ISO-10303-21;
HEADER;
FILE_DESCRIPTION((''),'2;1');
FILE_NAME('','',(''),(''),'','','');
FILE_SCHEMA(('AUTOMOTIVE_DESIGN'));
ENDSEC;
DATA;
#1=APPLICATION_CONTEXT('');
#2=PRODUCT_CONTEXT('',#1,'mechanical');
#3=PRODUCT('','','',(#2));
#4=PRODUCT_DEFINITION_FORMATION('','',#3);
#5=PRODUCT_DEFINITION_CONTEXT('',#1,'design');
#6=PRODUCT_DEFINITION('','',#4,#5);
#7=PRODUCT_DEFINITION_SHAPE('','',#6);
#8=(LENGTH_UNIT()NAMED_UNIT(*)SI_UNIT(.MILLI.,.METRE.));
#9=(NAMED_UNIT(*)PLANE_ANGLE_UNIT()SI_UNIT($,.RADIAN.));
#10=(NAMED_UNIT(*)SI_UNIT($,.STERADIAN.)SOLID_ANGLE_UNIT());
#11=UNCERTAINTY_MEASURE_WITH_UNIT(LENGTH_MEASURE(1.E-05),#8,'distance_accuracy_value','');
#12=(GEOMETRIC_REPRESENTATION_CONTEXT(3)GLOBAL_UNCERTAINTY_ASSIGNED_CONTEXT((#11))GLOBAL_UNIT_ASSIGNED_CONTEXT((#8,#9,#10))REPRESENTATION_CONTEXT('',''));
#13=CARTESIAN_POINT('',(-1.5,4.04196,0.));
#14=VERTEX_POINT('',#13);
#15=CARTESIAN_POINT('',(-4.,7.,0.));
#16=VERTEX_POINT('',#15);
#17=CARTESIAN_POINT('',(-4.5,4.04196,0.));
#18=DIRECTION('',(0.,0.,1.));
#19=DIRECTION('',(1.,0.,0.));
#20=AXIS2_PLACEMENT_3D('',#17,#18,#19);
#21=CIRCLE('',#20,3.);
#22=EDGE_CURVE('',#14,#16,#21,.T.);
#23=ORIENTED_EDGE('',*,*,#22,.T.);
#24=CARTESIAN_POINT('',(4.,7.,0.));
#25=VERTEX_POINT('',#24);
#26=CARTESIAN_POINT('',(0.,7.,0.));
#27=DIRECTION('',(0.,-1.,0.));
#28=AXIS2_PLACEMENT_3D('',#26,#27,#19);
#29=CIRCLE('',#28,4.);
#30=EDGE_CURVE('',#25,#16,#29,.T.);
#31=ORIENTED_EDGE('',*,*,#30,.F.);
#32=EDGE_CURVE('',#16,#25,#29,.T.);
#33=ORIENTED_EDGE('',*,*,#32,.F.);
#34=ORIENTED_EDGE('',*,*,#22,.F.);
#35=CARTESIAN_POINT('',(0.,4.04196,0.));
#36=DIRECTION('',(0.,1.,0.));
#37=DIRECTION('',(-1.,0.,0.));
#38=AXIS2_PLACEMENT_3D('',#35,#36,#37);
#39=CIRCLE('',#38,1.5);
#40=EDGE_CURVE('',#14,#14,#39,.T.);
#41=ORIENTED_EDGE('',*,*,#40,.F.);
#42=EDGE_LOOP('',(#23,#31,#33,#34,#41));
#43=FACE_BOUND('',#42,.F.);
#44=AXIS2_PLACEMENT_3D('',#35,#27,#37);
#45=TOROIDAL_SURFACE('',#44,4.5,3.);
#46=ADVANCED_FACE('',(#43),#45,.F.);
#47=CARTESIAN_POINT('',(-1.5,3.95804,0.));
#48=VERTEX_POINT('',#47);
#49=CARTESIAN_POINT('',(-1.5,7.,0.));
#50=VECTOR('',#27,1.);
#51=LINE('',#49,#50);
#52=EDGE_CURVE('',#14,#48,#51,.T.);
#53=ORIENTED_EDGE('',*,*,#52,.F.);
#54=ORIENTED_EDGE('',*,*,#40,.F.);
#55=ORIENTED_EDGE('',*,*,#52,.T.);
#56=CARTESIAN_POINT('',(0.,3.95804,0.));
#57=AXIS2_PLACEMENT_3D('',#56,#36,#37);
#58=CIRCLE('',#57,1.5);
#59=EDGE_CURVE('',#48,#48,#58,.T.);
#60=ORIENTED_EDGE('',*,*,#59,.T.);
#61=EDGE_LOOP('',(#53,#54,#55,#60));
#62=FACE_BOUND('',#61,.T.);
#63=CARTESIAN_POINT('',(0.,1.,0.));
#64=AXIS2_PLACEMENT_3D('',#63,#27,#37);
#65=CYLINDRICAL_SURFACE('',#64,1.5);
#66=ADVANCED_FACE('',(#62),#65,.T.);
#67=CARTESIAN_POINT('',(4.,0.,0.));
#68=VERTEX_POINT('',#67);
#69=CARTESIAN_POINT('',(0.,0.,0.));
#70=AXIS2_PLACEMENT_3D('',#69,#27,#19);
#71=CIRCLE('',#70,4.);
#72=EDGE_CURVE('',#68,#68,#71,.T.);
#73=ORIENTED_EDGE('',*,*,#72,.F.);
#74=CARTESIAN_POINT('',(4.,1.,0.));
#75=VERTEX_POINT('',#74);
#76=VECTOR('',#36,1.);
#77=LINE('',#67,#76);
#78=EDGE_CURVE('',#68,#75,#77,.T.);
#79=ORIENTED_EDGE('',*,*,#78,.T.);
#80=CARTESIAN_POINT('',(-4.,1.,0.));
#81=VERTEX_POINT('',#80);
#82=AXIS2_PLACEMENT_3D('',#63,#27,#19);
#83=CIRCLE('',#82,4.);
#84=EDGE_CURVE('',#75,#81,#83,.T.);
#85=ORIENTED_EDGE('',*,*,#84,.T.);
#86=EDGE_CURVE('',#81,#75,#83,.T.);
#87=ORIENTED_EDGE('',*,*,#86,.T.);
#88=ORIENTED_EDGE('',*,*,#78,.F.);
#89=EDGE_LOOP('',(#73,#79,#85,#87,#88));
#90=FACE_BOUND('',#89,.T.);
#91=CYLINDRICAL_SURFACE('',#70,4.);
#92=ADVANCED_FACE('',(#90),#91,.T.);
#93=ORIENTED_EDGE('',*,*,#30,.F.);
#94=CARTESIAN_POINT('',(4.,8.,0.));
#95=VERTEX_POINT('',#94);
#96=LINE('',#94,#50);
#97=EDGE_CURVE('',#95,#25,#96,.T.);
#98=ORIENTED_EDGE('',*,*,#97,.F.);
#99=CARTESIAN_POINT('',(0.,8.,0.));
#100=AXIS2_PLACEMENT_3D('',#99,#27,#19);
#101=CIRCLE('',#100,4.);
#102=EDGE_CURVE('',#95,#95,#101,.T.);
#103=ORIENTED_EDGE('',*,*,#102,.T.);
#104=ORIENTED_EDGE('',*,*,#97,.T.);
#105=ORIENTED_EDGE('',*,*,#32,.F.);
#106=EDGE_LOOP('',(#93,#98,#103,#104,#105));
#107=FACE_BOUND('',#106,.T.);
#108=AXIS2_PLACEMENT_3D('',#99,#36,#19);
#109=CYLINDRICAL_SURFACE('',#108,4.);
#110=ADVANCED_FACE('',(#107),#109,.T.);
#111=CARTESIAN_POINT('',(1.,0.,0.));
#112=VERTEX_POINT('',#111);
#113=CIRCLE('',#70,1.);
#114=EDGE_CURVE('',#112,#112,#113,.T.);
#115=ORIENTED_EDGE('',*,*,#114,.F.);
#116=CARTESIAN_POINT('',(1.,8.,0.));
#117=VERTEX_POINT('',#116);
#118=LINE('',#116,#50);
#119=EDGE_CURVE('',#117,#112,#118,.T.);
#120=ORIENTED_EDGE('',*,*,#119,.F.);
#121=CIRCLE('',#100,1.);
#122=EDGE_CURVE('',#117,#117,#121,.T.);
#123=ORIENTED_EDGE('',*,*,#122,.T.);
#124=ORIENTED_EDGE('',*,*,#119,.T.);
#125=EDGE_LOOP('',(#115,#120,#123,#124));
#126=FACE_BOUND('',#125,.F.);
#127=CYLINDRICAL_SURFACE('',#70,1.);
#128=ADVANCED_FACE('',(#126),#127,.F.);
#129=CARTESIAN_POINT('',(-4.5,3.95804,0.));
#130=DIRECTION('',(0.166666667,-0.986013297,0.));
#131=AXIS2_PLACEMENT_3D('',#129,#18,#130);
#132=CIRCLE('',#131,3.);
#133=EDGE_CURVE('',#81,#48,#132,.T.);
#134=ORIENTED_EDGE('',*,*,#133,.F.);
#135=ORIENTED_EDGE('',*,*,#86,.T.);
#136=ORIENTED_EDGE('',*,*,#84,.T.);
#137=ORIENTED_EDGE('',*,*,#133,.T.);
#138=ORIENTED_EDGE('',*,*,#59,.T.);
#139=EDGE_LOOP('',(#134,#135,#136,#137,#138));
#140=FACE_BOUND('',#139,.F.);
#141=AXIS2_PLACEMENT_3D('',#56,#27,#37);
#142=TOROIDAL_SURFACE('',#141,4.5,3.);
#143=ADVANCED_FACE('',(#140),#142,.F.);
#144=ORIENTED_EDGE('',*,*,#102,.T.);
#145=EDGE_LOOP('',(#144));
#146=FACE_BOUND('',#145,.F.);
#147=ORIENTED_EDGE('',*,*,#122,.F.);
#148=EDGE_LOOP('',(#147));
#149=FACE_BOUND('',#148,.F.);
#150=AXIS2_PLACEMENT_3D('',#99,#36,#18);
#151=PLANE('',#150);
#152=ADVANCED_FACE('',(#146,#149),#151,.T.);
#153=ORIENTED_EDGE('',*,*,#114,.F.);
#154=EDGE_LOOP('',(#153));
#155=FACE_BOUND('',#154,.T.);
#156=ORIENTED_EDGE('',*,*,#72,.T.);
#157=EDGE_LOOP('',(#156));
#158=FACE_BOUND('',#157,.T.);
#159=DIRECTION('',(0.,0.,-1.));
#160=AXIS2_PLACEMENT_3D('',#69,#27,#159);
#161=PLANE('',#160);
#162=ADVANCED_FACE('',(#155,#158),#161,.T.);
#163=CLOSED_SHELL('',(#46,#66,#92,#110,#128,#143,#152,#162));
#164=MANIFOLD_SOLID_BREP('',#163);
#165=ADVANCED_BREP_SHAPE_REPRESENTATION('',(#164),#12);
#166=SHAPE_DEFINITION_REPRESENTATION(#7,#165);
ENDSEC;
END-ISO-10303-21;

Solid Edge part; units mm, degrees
sketch "Sketch1" plane through (0, 0, 0) normal (0, -1, 0) x (1, 0, 0)
  circle A0 centre (0, 0) radius 4
  circle A1 centre (0, 0) radius 1
extrude "Protrusion1" add sketch "Sketch1" against normal blind 1
sketch "Sketch2" plane through (0, 1, 0) normal (0, 1, 0) x (-1, 0, 0)
  circle A0 centre (0, 0) radius 1.5
extrude "ExtrudedProtrusion_3" add sketch "Sketch2" along normal blind 3
mirror "Mirror1" about plane through (0, 4, 0) normal (0, 1, 0) of "ExtrudedProtrusion_3", "Protrusion1"
sketch "Sketch3" plane through (0, 0, 0) normal (0, -1, 0) x (1, 0, 0)
  circle A0 centre (0, 0) radius 1
extrude "ExtrudedCutout_1" cut sketch "Sketch3" against normal blind 15.8267
fillet "Round_1" radius 3 1 edges at (1.5, 1, 0)
fillet "Round_2" radius 3 1 edges at (1.5, 7, 0)
